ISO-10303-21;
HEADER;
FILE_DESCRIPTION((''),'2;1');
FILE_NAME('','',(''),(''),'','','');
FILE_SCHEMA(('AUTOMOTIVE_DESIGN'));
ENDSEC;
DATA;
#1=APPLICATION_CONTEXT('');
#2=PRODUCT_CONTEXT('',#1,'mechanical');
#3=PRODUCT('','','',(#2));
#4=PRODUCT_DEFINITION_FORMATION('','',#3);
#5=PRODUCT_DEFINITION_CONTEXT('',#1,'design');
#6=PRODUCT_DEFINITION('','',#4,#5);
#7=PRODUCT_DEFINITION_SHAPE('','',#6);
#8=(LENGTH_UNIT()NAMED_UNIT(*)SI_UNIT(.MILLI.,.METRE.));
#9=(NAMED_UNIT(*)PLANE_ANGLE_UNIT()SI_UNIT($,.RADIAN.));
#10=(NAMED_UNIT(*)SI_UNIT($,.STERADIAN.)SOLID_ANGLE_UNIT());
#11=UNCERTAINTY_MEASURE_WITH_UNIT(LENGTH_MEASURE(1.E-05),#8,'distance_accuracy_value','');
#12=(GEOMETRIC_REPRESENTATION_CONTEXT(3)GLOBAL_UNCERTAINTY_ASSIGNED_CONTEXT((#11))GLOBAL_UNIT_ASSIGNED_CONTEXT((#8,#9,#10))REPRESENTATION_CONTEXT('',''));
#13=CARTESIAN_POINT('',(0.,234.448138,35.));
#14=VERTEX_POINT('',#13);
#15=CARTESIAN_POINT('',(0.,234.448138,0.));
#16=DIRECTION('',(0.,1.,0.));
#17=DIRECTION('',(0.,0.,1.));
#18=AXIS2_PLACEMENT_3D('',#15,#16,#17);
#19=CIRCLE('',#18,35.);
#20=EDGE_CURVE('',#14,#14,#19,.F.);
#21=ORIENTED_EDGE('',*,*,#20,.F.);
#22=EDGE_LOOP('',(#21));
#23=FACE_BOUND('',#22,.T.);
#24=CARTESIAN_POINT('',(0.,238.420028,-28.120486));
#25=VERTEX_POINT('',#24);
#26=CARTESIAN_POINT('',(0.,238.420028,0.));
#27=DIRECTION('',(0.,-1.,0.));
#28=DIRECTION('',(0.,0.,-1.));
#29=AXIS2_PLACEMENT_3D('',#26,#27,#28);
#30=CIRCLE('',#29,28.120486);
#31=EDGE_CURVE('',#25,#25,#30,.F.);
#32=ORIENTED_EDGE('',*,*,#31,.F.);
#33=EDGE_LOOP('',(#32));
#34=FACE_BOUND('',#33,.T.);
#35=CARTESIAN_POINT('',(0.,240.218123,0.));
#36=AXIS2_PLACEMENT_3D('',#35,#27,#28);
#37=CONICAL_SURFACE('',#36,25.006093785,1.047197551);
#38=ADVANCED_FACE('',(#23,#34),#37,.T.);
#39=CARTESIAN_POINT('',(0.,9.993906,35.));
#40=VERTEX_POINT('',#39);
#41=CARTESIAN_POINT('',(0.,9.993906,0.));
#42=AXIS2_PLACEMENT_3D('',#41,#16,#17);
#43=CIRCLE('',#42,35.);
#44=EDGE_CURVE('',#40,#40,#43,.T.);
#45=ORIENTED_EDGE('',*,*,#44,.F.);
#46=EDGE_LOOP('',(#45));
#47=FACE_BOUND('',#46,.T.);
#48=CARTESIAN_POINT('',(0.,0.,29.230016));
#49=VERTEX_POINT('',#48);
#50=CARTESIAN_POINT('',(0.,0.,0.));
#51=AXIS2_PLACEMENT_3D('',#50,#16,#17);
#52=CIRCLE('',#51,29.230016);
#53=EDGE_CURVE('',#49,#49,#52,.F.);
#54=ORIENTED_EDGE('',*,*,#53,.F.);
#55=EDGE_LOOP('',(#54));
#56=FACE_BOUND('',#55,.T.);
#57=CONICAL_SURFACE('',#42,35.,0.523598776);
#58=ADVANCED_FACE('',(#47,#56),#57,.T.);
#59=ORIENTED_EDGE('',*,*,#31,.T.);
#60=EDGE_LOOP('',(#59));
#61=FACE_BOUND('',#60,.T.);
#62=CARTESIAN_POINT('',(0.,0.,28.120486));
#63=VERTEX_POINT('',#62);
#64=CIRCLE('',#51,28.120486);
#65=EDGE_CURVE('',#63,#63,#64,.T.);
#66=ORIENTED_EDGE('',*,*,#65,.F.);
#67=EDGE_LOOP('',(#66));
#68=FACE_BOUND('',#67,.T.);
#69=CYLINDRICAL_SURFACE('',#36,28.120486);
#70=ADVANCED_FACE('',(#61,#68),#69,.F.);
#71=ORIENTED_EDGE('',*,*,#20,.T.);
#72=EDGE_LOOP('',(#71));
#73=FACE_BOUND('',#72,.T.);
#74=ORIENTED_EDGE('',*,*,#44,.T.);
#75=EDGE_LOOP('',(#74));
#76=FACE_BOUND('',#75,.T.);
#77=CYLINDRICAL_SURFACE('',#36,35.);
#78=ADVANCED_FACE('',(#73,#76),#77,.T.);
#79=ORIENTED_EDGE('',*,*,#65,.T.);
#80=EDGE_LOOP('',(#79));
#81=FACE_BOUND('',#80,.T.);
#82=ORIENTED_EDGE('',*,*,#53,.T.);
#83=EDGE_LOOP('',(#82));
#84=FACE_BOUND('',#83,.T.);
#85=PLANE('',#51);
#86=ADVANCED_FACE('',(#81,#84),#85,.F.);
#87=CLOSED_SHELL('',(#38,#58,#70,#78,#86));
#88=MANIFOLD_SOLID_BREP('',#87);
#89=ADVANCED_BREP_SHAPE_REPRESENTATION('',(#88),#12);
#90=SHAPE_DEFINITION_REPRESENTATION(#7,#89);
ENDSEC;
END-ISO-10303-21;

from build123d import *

# Parameters (mm, degrees)
SKETCH1_R           = 35
BOSS_EXTRUDE1_DEPTH = 240.218123
SKETCH2_R           = 28.120485596
CUT_EXTRUDE1_DEPTH  = 246.264646082
CHAMFER1_SIZE       = 5.769984
CHAMFER1_SIZE_2     = 9.993906


with BuildPart() as part:
    # Sketch1 → Boss-Extrude1 (new body)
    with BuildSketch(Plane(origin=(0, 0, 0), x_dir=(1, 0, 0), z_dir=(0, 1, 0))):
        with Locations(Location((0, 0, 0), (0, 0, 270))):
            Circle(SKETCH1_R)
    extrude(amount=BOSS_EXTRUDE1_DEPTH)

    # Sketch2 → Cut-Extrude1 (cut, through all)
    with BuildSketch(Plane(origin=(0, 0, 0), x_dir=(1, 0, 0), z_dir=(0, 1, 0))):
        with Locations(Location((0, 0, 0), (0, 0, 270))):
            Circle(SKETCH2_R)
    extrude(amount=CUT_EXTRUDE1_DEPTH, mode=Mode.SUBTRACT)

    # Chamfer1
    # the kernel refuses this chamfer: 9.993906, 5.769984 mm, written as the material it takes off along each edge
    with BuildSketch(Plane(origin=(0, 240.218123, 0), x_dir=(0, 0, 1), z_dir=(-1, 0, 0))) as chamfer1_piece_1:
        Polygon((35, -CHAMFER1_SIZE), (35 - CHAMFER1_SIZE_2, 0), (35, 0), align=None)
    revolve(axis=Axis((0, 240.218123, 0), (0, 1, 0)), mode=Mode.SUBTRACT)
    with BuildSketch(Plane(origin=(0, 0, 0), x_dir=(0, 0, 1), z_dir=(-1, 0, 0))) as chamfer1_piece_2:
        Polygon((35, CHAMFER1_SIZE_2), (35 - CHAMFER1_SIZE, 0), (35, 0), align=None)
    revolve(axis=Axis((0, 0, 0), (0, 1, 0)), mode=Mode.SUBTRACT)


solid = part.part
